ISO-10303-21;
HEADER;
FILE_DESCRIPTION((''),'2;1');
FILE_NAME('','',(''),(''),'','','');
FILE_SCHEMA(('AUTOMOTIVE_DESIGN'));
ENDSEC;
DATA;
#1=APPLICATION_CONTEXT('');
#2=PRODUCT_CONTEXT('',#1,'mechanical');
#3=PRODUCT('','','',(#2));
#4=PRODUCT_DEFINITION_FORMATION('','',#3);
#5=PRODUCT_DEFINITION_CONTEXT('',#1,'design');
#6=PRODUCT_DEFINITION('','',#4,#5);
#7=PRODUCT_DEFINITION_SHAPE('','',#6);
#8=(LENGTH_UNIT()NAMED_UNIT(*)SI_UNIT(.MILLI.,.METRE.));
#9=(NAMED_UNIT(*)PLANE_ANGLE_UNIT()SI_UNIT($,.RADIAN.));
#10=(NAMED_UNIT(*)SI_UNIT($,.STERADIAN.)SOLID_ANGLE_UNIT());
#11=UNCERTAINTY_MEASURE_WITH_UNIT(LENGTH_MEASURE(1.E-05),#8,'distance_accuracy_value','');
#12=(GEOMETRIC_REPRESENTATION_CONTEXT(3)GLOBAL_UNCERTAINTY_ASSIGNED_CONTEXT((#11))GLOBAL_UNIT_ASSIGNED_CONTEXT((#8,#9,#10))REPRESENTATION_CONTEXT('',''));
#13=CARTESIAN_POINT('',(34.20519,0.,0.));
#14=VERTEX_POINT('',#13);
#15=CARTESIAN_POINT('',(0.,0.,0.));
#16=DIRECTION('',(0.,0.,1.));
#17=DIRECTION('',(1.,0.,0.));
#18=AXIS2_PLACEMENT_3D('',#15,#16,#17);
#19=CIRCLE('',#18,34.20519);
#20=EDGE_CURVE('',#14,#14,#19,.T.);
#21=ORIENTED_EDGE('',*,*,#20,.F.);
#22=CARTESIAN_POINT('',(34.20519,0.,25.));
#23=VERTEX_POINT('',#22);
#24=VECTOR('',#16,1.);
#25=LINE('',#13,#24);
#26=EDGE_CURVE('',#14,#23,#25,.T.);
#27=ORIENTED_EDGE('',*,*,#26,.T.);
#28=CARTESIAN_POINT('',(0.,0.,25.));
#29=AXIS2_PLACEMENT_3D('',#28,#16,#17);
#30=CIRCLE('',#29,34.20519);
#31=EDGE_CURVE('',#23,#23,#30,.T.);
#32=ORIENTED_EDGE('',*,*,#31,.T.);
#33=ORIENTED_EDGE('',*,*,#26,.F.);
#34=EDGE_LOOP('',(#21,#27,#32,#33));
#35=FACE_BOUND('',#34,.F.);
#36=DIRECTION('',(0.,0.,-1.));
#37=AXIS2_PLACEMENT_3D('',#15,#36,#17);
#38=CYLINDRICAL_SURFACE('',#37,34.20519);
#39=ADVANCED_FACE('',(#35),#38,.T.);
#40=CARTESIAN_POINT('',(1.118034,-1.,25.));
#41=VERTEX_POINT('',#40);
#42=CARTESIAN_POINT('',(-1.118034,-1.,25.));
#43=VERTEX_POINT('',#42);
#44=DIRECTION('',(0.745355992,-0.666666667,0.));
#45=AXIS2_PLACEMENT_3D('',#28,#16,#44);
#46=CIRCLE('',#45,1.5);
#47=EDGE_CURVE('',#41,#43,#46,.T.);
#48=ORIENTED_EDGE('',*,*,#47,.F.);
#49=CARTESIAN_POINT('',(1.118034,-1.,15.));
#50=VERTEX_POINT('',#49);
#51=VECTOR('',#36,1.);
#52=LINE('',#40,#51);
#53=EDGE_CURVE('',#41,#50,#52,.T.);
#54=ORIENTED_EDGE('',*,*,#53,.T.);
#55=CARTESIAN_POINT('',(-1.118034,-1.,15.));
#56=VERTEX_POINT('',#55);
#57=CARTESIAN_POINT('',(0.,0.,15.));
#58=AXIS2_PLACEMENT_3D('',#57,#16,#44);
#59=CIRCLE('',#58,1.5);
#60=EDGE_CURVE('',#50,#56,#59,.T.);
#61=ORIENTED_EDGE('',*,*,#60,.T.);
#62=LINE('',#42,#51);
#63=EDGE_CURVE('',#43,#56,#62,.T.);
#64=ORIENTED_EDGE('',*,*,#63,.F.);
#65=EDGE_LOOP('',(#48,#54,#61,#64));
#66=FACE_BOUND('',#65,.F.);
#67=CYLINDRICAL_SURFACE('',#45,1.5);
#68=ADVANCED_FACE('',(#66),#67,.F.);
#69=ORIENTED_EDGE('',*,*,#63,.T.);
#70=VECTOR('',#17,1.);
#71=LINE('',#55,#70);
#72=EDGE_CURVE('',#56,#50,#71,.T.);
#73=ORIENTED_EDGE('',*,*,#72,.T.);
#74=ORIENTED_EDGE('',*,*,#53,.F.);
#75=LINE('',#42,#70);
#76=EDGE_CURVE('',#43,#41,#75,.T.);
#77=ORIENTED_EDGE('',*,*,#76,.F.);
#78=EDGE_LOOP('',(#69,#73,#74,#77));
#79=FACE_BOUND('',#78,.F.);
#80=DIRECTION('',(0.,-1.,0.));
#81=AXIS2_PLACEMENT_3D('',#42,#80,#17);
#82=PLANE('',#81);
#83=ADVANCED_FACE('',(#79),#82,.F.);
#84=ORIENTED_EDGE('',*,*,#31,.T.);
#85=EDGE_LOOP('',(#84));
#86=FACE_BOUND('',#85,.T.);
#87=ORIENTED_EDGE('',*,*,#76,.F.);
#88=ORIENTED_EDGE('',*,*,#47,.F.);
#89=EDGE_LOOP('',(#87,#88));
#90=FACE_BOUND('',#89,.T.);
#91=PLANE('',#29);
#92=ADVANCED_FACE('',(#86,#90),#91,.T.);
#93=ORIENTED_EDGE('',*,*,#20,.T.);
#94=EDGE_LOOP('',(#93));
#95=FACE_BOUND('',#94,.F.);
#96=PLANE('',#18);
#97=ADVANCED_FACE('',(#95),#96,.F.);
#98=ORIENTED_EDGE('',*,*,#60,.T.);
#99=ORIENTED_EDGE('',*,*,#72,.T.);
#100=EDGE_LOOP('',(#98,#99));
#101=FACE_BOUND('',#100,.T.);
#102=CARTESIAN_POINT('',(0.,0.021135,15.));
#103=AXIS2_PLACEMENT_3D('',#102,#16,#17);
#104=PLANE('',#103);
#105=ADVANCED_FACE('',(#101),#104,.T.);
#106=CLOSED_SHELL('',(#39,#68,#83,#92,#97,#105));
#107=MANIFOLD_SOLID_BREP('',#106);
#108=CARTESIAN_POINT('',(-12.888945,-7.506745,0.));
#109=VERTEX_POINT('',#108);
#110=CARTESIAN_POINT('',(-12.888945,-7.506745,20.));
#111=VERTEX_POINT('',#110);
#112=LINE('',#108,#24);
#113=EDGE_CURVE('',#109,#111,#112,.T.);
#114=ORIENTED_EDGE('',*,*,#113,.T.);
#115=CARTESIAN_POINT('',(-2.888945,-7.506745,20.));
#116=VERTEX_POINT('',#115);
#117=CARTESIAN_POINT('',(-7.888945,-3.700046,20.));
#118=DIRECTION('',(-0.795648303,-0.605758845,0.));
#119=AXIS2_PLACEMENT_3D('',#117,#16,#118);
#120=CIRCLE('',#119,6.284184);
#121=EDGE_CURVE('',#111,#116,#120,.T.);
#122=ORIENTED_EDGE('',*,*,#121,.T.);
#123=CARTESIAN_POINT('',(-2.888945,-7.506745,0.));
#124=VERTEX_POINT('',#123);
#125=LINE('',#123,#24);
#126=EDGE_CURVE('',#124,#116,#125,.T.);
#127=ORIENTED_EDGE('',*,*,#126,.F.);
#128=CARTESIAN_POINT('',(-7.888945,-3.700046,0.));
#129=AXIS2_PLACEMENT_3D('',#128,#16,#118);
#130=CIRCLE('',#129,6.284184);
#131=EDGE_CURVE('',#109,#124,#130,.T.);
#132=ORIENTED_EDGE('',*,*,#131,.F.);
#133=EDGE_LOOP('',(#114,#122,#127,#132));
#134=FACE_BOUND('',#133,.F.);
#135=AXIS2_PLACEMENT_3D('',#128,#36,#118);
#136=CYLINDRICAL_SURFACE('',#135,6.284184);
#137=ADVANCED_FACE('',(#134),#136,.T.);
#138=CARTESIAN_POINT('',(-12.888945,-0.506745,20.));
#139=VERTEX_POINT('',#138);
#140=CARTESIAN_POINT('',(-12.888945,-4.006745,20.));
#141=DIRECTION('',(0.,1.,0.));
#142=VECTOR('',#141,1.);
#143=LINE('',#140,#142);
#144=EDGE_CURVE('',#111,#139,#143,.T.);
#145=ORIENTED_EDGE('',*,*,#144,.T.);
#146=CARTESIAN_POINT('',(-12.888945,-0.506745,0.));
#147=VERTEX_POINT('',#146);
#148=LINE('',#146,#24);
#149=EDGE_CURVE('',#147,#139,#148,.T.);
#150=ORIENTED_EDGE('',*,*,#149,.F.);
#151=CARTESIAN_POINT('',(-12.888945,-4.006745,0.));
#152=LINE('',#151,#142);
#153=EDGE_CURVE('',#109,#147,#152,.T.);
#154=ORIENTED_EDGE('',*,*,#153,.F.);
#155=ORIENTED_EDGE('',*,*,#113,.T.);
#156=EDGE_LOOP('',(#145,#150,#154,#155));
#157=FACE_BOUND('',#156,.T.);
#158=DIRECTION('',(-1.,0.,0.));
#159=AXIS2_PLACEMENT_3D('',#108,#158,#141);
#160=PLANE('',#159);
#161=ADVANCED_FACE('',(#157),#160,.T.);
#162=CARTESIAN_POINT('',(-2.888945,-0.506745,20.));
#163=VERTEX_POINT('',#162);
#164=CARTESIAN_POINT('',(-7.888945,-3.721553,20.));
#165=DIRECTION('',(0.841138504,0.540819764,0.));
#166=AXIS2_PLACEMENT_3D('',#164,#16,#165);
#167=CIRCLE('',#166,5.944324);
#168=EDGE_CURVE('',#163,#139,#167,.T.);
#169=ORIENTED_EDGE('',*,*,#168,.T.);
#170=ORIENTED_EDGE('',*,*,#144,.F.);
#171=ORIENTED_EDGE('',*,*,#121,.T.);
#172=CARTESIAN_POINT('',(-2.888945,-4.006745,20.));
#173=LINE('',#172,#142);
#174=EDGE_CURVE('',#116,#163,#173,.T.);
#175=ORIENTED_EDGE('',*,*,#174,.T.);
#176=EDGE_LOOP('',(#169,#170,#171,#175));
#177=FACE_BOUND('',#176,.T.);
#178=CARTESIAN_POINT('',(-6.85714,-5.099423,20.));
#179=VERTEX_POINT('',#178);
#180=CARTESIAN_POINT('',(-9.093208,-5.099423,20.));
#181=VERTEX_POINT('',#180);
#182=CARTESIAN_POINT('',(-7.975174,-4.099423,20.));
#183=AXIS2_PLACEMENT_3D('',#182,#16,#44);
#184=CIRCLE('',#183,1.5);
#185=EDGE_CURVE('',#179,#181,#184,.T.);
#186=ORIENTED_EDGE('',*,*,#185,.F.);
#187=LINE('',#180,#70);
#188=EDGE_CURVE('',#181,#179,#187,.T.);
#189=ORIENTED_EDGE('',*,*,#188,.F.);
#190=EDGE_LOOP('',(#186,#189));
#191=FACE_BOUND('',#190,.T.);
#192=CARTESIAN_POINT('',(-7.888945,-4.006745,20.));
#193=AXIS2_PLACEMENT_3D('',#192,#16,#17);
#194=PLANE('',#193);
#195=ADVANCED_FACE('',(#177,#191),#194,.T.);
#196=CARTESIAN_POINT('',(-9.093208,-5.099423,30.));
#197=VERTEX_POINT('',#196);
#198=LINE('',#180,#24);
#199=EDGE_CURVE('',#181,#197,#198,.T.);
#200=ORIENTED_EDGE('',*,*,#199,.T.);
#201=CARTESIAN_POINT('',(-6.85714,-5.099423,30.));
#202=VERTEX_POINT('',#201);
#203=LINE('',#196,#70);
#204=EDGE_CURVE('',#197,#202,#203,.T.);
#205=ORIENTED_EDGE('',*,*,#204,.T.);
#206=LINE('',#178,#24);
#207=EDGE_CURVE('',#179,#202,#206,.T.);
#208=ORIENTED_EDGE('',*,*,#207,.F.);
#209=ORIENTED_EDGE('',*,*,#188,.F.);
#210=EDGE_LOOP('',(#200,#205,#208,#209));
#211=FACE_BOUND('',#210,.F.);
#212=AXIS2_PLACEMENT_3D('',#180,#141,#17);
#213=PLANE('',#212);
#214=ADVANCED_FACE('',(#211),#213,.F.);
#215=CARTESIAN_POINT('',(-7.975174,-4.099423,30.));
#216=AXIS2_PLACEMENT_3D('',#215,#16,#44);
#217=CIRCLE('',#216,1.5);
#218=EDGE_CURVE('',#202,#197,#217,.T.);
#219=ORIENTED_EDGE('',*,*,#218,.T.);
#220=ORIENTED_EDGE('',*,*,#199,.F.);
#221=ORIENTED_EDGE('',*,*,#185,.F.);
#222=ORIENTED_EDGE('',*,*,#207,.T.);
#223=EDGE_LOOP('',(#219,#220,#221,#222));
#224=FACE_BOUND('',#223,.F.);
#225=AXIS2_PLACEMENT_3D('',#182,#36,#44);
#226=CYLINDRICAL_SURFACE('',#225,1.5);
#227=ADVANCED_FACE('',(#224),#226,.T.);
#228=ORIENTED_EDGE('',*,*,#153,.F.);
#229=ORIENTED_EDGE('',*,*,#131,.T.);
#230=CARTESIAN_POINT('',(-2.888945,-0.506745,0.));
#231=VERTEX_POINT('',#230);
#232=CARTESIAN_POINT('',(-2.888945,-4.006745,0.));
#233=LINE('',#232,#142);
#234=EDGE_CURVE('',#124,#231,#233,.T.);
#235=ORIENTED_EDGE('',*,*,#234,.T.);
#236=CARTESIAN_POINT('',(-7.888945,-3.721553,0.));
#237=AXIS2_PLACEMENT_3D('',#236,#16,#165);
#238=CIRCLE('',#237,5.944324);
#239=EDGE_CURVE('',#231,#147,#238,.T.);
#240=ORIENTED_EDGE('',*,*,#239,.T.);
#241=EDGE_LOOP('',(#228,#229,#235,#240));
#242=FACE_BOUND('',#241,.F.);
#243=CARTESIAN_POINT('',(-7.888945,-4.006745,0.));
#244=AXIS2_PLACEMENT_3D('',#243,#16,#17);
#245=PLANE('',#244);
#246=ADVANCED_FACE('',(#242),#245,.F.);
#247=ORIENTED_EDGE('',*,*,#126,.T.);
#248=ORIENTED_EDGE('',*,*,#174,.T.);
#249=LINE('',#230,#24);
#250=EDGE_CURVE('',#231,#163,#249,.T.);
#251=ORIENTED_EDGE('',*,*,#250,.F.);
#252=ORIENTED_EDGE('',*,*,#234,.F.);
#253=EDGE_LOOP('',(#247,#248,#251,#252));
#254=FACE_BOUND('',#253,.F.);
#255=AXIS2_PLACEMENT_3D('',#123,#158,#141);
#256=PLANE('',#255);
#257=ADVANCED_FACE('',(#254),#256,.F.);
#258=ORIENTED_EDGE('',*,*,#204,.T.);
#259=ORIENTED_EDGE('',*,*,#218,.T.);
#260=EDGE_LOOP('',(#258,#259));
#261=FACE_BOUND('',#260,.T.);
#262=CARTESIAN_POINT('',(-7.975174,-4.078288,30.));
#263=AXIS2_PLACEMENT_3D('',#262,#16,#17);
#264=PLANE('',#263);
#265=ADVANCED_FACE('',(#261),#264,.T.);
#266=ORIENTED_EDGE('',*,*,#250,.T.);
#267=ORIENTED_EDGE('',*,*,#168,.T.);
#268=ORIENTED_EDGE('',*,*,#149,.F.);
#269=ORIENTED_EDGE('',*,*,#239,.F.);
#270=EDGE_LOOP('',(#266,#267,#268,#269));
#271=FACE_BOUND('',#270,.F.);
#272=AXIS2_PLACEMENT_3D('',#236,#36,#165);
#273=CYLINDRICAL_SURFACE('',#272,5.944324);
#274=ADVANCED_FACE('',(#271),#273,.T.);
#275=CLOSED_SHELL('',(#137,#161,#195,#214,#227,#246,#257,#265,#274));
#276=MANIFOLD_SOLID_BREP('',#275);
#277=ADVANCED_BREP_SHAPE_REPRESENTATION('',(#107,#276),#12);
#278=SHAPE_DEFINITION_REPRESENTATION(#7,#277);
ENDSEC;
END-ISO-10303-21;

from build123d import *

# Parameters (mm, degrees)
F0_R     = 34.2051900743
F1_DEPTH = 25
F3_DEPTH = 10
F4_W     = 10
F4_H     = 7
F5_DEPTH = 20
F7_DEPTH = 10


with BuildPart() as f1:
    # F0 (on Top) → F1 (new body)
    with BuildSketch(Plane.XY):
        Circle(F0_R)
    extrude(amount=F1_DEPTH)

    # F2 (on face) → F3 (cut)
    with BuildSketch(Plane.XY.offset(25)):
        with BuildLine():
            Line((0, -1), (1.1180339887, -1))
            ThreePointArc((1.1180339887, -1), (0, 1.5), (-1.1180339887, -1))
            Line((-1.1180339887, -1), (0, -1))
        make_face()
    extrude(amount=-F3_DEPTH, mode=Mode.SUBTRACT)


with BuildPart() as f5:
    # F4 (on Top) → F5 (new body)
    with BuildSketch(Plane.XY):
        with Locations((-7.8889451153, -4.0067454018)):
            Rectangle(F4_W, F4_H)
        with BuildLine():
            Line((-12.8889451153, -0.5067454018), (-2.8889451153, -0.5067454018))
            ThreePointArc((-2.8889451153, -0.5067454018), (-7.8889451153, 2.2227708057), (-12.8889451153, -0.5067454018))
        make_face()
        with BuildLine():
            ThreePointArc((-12.8889451153, -7.5067454018), (-7.8889451153, -9.9842291943), (-2.8889451153, -7.5067454018))
            Line((-2.8889451153, -7.5067454018), (-12.8889451153, -7.5067454018))
        make_face()
    extrude(amount=F5_DEPTH)

    # F6 (on face) → F7 (join)
    with BuildSketch(Plane.XY.offset(20)):
        with BuildLine():
            Line((-7.9751741141, -5.0994232297), (-6.8571401254, -5.0994232297))
            ThreePointArc((-6.8571401254, -5.0994232297), (-7.9751741141, -2.5994232297), (-9.0932081029, -5.0994232297))
            Line((-9.0932081029, -5.0994232297), (-7.9751741141, -5.0994232297))
        make_face()
    extrude(amount=F7_DEPTH)


solid = Compound([f1.part, f5.part])
